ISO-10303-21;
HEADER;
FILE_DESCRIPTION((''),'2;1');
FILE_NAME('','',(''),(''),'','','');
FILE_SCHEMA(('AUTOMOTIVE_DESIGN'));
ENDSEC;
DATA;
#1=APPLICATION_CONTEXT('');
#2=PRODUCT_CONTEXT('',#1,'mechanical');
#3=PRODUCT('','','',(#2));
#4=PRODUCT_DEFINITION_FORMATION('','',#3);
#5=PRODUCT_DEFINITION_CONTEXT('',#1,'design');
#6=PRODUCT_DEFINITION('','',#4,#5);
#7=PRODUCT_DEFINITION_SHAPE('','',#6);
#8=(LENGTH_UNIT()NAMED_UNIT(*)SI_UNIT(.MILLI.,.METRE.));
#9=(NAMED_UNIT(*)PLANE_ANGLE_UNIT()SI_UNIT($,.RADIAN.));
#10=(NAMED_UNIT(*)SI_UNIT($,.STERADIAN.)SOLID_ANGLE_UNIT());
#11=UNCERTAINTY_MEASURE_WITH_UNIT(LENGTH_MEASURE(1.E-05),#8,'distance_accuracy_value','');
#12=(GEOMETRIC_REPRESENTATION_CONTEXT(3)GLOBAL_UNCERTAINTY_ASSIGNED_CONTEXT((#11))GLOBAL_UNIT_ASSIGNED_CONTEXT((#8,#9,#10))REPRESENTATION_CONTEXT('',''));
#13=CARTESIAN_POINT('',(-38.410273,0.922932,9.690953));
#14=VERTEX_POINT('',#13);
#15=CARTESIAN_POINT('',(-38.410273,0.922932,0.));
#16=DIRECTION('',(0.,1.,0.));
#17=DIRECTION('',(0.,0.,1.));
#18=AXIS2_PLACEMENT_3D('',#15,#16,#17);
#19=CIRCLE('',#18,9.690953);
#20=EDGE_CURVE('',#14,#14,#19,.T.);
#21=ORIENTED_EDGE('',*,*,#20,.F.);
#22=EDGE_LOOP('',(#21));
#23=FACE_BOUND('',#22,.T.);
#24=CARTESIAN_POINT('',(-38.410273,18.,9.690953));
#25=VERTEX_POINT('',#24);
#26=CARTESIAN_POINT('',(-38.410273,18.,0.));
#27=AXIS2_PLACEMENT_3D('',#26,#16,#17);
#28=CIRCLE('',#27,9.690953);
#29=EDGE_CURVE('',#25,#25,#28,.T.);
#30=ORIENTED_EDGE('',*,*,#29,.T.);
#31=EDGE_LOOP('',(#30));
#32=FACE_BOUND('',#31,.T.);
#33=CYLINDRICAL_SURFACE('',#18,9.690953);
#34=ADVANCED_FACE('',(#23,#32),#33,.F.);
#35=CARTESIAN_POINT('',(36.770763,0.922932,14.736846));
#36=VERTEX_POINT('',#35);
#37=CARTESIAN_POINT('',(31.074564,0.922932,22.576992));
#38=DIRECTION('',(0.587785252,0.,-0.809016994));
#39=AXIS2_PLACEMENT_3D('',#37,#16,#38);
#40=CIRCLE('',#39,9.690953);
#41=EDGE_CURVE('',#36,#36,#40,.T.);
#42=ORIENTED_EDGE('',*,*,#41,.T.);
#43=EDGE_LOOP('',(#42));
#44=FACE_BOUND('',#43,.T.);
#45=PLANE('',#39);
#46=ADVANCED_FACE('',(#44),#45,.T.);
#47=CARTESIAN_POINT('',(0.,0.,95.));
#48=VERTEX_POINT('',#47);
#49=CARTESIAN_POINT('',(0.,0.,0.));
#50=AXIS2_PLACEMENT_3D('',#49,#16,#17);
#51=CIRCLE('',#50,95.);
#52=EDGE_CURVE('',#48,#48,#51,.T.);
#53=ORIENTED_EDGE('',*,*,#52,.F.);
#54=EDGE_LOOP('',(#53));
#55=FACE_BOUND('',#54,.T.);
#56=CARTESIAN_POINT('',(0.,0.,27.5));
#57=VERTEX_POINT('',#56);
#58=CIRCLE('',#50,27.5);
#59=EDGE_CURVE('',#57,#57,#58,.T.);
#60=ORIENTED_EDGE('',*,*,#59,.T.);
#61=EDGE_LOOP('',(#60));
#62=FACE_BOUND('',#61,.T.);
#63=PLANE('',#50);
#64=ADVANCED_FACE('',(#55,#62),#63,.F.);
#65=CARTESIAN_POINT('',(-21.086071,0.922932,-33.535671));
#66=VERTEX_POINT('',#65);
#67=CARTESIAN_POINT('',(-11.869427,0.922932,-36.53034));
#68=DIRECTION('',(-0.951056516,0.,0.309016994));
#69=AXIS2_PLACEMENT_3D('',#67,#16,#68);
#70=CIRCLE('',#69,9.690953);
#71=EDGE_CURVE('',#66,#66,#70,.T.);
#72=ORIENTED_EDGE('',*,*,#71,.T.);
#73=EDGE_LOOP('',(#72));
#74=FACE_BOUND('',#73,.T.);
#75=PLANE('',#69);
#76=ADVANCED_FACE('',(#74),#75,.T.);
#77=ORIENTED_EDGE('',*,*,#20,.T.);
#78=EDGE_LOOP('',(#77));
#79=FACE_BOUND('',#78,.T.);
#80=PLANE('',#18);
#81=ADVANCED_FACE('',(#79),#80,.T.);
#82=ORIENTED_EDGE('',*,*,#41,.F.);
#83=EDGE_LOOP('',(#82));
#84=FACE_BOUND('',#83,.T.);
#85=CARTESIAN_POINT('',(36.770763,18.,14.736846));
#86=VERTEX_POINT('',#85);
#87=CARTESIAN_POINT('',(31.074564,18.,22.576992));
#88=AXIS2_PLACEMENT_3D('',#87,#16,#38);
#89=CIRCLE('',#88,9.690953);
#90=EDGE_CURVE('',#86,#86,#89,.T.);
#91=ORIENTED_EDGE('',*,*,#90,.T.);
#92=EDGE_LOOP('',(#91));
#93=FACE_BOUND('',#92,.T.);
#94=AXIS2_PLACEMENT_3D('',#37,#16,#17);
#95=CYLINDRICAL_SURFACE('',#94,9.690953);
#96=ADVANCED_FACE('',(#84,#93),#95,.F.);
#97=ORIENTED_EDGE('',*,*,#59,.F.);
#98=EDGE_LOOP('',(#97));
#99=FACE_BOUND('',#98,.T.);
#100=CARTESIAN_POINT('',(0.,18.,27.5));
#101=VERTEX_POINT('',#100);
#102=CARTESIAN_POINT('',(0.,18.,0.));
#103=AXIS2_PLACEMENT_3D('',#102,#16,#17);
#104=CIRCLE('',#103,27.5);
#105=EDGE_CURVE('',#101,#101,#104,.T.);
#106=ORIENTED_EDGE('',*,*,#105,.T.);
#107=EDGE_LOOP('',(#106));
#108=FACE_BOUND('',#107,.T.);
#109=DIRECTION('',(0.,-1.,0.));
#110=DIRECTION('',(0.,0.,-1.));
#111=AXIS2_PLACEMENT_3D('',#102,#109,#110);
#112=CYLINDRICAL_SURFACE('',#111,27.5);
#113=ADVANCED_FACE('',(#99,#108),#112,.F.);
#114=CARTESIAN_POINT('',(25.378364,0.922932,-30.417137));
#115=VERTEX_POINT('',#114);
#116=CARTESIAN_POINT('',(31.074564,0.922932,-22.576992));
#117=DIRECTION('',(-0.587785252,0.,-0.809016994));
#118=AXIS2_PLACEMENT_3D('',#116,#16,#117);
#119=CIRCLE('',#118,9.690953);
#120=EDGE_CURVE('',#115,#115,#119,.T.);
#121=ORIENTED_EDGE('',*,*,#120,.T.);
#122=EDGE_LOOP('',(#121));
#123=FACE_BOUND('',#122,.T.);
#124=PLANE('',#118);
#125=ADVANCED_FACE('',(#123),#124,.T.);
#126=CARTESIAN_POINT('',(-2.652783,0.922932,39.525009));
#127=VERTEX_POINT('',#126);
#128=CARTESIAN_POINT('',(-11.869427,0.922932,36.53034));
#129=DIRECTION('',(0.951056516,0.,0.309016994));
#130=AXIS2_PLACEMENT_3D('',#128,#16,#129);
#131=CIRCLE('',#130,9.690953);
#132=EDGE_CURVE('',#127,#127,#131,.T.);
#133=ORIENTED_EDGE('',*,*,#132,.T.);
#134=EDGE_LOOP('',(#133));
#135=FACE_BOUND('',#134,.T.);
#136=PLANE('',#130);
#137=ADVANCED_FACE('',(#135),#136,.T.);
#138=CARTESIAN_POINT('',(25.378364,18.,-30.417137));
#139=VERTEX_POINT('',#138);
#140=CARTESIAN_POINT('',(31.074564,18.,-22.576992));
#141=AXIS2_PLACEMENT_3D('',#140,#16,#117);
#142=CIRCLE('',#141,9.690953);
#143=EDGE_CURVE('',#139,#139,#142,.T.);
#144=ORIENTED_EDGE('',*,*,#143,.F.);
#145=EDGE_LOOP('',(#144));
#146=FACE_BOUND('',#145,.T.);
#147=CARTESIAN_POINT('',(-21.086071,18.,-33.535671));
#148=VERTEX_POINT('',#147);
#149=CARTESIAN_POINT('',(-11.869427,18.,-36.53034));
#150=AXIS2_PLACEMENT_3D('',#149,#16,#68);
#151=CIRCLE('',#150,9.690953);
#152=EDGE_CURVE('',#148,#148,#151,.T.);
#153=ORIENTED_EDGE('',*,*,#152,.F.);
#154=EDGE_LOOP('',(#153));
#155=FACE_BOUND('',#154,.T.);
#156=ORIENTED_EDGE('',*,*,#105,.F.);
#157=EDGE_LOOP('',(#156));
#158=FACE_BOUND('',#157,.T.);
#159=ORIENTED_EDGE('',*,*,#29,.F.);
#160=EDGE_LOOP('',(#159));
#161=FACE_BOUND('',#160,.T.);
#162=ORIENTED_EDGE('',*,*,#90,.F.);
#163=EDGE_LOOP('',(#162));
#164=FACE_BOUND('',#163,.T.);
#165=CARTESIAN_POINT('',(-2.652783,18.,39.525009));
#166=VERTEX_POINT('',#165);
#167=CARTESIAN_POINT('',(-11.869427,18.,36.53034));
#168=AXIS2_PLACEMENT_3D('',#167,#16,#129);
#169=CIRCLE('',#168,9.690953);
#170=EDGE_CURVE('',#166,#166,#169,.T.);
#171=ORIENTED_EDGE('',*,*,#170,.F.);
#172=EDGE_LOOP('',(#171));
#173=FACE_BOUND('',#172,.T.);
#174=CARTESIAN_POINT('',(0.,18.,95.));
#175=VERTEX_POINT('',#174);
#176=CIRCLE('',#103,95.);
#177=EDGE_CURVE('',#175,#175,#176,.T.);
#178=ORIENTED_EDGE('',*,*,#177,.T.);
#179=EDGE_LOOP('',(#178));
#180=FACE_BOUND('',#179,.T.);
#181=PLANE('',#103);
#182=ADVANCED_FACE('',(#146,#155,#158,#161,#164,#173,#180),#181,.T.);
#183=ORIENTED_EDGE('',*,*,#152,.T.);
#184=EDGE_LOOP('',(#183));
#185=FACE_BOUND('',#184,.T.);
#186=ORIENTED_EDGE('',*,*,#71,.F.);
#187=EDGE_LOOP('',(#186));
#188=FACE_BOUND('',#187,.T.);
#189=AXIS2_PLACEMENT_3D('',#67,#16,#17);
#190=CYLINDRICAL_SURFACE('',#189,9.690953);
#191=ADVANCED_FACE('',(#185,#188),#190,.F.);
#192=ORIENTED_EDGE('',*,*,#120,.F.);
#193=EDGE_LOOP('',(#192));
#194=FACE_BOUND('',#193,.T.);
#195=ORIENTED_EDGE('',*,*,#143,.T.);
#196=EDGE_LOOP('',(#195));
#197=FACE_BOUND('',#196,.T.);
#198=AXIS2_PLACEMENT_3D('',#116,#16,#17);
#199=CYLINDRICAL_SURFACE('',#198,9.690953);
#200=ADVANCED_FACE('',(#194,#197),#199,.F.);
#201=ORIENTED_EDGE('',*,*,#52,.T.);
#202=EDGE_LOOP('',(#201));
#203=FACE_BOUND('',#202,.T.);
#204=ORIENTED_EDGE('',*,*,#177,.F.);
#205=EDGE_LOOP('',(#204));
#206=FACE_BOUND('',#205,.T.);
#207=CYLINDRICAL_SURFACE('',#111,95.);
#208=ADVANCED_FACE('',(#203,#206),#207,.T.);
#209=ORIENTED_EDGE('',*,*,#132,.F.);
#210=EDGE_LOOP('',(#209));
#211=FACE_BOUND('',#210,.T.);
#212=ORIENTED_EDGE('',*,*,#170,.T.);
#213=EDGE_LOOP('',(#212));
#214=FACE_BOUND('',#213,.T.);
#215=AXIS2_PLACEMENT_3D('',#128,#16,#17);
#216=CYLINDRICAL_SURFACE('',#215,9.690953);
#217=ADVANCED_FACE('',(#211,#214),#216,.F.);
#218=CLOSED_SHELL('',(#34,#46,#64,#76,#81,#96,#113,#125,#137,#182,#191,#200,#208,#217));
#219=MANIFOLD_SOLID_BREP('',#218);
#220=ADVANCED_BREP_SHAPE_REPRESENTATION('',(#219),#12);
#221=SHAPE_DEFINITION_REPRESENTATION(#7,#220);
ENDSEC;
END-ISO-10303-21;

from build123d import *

# Parameters (mm, degrees)
SKETCH1_R           = 95
BOSS_EXTRUDE1_DEPTH = 18
SKETCH2_R           = 27.5
CUT_EXTRUDE1_DEPTH  = 136.550728512
SKETCH3_R           = 9.690952838
CUT_EXTRUDE2_DEPTH  = 17.077067561
CIRPATTERN1_COUNT   = 5


with BuildPart() as part:
    # Sketch1 → Boss-Extrude1 (new body)
    with BuildSketch(Plane(origin=(0, 0, 0), x_dir=(1, 0, 0), z_dir=(0, 1, 0))):
        Circle(SKETCH1_R)
    extrude(amount=BOSS_EXTRUDE1_DEPTH)

    # Sketch2 → Cut-Extrude1 (cut, through all)
    with BuildSketch(Plane(origin=(0, 0, 0), x_dir=(1, 0, 0), z_dir=(0, 1, 0))):
        Circle(SKETCH2_R)
    extrude(amount=CUT_EXTRUDE1_DEPTH, mode=Mode.SUBTRACT)

    # Sketch3 → Cut-Extrude2 (cut)
    with BuildSketch(Plane(origin=(0, 18, 0), x_dir=(1, 0, 0), z_dir=(0, 1, 0))):
        with Locations((-38.410272881, 0)):
            Circle(SKETCH3_R)
    cut_extrude2 = extrude(amount=-CUT_EXTRUDE2_DEPTH, mode=Mode.SUBTRACT)

    # CirPattern1: Cut-Extrude2 ×5 about axis
    cirpattern1_axis = Axis((0, 0, 0), (0, 1, 0))
    for i in range(1, CIRPATTERN1_COUNT):
        add(cut_extrude2.rotate(cirpattern1_axis, i * 360 / CIRPATTERN1_COUNT), mode=Mode.SUBTRACT)


solid = part.part
